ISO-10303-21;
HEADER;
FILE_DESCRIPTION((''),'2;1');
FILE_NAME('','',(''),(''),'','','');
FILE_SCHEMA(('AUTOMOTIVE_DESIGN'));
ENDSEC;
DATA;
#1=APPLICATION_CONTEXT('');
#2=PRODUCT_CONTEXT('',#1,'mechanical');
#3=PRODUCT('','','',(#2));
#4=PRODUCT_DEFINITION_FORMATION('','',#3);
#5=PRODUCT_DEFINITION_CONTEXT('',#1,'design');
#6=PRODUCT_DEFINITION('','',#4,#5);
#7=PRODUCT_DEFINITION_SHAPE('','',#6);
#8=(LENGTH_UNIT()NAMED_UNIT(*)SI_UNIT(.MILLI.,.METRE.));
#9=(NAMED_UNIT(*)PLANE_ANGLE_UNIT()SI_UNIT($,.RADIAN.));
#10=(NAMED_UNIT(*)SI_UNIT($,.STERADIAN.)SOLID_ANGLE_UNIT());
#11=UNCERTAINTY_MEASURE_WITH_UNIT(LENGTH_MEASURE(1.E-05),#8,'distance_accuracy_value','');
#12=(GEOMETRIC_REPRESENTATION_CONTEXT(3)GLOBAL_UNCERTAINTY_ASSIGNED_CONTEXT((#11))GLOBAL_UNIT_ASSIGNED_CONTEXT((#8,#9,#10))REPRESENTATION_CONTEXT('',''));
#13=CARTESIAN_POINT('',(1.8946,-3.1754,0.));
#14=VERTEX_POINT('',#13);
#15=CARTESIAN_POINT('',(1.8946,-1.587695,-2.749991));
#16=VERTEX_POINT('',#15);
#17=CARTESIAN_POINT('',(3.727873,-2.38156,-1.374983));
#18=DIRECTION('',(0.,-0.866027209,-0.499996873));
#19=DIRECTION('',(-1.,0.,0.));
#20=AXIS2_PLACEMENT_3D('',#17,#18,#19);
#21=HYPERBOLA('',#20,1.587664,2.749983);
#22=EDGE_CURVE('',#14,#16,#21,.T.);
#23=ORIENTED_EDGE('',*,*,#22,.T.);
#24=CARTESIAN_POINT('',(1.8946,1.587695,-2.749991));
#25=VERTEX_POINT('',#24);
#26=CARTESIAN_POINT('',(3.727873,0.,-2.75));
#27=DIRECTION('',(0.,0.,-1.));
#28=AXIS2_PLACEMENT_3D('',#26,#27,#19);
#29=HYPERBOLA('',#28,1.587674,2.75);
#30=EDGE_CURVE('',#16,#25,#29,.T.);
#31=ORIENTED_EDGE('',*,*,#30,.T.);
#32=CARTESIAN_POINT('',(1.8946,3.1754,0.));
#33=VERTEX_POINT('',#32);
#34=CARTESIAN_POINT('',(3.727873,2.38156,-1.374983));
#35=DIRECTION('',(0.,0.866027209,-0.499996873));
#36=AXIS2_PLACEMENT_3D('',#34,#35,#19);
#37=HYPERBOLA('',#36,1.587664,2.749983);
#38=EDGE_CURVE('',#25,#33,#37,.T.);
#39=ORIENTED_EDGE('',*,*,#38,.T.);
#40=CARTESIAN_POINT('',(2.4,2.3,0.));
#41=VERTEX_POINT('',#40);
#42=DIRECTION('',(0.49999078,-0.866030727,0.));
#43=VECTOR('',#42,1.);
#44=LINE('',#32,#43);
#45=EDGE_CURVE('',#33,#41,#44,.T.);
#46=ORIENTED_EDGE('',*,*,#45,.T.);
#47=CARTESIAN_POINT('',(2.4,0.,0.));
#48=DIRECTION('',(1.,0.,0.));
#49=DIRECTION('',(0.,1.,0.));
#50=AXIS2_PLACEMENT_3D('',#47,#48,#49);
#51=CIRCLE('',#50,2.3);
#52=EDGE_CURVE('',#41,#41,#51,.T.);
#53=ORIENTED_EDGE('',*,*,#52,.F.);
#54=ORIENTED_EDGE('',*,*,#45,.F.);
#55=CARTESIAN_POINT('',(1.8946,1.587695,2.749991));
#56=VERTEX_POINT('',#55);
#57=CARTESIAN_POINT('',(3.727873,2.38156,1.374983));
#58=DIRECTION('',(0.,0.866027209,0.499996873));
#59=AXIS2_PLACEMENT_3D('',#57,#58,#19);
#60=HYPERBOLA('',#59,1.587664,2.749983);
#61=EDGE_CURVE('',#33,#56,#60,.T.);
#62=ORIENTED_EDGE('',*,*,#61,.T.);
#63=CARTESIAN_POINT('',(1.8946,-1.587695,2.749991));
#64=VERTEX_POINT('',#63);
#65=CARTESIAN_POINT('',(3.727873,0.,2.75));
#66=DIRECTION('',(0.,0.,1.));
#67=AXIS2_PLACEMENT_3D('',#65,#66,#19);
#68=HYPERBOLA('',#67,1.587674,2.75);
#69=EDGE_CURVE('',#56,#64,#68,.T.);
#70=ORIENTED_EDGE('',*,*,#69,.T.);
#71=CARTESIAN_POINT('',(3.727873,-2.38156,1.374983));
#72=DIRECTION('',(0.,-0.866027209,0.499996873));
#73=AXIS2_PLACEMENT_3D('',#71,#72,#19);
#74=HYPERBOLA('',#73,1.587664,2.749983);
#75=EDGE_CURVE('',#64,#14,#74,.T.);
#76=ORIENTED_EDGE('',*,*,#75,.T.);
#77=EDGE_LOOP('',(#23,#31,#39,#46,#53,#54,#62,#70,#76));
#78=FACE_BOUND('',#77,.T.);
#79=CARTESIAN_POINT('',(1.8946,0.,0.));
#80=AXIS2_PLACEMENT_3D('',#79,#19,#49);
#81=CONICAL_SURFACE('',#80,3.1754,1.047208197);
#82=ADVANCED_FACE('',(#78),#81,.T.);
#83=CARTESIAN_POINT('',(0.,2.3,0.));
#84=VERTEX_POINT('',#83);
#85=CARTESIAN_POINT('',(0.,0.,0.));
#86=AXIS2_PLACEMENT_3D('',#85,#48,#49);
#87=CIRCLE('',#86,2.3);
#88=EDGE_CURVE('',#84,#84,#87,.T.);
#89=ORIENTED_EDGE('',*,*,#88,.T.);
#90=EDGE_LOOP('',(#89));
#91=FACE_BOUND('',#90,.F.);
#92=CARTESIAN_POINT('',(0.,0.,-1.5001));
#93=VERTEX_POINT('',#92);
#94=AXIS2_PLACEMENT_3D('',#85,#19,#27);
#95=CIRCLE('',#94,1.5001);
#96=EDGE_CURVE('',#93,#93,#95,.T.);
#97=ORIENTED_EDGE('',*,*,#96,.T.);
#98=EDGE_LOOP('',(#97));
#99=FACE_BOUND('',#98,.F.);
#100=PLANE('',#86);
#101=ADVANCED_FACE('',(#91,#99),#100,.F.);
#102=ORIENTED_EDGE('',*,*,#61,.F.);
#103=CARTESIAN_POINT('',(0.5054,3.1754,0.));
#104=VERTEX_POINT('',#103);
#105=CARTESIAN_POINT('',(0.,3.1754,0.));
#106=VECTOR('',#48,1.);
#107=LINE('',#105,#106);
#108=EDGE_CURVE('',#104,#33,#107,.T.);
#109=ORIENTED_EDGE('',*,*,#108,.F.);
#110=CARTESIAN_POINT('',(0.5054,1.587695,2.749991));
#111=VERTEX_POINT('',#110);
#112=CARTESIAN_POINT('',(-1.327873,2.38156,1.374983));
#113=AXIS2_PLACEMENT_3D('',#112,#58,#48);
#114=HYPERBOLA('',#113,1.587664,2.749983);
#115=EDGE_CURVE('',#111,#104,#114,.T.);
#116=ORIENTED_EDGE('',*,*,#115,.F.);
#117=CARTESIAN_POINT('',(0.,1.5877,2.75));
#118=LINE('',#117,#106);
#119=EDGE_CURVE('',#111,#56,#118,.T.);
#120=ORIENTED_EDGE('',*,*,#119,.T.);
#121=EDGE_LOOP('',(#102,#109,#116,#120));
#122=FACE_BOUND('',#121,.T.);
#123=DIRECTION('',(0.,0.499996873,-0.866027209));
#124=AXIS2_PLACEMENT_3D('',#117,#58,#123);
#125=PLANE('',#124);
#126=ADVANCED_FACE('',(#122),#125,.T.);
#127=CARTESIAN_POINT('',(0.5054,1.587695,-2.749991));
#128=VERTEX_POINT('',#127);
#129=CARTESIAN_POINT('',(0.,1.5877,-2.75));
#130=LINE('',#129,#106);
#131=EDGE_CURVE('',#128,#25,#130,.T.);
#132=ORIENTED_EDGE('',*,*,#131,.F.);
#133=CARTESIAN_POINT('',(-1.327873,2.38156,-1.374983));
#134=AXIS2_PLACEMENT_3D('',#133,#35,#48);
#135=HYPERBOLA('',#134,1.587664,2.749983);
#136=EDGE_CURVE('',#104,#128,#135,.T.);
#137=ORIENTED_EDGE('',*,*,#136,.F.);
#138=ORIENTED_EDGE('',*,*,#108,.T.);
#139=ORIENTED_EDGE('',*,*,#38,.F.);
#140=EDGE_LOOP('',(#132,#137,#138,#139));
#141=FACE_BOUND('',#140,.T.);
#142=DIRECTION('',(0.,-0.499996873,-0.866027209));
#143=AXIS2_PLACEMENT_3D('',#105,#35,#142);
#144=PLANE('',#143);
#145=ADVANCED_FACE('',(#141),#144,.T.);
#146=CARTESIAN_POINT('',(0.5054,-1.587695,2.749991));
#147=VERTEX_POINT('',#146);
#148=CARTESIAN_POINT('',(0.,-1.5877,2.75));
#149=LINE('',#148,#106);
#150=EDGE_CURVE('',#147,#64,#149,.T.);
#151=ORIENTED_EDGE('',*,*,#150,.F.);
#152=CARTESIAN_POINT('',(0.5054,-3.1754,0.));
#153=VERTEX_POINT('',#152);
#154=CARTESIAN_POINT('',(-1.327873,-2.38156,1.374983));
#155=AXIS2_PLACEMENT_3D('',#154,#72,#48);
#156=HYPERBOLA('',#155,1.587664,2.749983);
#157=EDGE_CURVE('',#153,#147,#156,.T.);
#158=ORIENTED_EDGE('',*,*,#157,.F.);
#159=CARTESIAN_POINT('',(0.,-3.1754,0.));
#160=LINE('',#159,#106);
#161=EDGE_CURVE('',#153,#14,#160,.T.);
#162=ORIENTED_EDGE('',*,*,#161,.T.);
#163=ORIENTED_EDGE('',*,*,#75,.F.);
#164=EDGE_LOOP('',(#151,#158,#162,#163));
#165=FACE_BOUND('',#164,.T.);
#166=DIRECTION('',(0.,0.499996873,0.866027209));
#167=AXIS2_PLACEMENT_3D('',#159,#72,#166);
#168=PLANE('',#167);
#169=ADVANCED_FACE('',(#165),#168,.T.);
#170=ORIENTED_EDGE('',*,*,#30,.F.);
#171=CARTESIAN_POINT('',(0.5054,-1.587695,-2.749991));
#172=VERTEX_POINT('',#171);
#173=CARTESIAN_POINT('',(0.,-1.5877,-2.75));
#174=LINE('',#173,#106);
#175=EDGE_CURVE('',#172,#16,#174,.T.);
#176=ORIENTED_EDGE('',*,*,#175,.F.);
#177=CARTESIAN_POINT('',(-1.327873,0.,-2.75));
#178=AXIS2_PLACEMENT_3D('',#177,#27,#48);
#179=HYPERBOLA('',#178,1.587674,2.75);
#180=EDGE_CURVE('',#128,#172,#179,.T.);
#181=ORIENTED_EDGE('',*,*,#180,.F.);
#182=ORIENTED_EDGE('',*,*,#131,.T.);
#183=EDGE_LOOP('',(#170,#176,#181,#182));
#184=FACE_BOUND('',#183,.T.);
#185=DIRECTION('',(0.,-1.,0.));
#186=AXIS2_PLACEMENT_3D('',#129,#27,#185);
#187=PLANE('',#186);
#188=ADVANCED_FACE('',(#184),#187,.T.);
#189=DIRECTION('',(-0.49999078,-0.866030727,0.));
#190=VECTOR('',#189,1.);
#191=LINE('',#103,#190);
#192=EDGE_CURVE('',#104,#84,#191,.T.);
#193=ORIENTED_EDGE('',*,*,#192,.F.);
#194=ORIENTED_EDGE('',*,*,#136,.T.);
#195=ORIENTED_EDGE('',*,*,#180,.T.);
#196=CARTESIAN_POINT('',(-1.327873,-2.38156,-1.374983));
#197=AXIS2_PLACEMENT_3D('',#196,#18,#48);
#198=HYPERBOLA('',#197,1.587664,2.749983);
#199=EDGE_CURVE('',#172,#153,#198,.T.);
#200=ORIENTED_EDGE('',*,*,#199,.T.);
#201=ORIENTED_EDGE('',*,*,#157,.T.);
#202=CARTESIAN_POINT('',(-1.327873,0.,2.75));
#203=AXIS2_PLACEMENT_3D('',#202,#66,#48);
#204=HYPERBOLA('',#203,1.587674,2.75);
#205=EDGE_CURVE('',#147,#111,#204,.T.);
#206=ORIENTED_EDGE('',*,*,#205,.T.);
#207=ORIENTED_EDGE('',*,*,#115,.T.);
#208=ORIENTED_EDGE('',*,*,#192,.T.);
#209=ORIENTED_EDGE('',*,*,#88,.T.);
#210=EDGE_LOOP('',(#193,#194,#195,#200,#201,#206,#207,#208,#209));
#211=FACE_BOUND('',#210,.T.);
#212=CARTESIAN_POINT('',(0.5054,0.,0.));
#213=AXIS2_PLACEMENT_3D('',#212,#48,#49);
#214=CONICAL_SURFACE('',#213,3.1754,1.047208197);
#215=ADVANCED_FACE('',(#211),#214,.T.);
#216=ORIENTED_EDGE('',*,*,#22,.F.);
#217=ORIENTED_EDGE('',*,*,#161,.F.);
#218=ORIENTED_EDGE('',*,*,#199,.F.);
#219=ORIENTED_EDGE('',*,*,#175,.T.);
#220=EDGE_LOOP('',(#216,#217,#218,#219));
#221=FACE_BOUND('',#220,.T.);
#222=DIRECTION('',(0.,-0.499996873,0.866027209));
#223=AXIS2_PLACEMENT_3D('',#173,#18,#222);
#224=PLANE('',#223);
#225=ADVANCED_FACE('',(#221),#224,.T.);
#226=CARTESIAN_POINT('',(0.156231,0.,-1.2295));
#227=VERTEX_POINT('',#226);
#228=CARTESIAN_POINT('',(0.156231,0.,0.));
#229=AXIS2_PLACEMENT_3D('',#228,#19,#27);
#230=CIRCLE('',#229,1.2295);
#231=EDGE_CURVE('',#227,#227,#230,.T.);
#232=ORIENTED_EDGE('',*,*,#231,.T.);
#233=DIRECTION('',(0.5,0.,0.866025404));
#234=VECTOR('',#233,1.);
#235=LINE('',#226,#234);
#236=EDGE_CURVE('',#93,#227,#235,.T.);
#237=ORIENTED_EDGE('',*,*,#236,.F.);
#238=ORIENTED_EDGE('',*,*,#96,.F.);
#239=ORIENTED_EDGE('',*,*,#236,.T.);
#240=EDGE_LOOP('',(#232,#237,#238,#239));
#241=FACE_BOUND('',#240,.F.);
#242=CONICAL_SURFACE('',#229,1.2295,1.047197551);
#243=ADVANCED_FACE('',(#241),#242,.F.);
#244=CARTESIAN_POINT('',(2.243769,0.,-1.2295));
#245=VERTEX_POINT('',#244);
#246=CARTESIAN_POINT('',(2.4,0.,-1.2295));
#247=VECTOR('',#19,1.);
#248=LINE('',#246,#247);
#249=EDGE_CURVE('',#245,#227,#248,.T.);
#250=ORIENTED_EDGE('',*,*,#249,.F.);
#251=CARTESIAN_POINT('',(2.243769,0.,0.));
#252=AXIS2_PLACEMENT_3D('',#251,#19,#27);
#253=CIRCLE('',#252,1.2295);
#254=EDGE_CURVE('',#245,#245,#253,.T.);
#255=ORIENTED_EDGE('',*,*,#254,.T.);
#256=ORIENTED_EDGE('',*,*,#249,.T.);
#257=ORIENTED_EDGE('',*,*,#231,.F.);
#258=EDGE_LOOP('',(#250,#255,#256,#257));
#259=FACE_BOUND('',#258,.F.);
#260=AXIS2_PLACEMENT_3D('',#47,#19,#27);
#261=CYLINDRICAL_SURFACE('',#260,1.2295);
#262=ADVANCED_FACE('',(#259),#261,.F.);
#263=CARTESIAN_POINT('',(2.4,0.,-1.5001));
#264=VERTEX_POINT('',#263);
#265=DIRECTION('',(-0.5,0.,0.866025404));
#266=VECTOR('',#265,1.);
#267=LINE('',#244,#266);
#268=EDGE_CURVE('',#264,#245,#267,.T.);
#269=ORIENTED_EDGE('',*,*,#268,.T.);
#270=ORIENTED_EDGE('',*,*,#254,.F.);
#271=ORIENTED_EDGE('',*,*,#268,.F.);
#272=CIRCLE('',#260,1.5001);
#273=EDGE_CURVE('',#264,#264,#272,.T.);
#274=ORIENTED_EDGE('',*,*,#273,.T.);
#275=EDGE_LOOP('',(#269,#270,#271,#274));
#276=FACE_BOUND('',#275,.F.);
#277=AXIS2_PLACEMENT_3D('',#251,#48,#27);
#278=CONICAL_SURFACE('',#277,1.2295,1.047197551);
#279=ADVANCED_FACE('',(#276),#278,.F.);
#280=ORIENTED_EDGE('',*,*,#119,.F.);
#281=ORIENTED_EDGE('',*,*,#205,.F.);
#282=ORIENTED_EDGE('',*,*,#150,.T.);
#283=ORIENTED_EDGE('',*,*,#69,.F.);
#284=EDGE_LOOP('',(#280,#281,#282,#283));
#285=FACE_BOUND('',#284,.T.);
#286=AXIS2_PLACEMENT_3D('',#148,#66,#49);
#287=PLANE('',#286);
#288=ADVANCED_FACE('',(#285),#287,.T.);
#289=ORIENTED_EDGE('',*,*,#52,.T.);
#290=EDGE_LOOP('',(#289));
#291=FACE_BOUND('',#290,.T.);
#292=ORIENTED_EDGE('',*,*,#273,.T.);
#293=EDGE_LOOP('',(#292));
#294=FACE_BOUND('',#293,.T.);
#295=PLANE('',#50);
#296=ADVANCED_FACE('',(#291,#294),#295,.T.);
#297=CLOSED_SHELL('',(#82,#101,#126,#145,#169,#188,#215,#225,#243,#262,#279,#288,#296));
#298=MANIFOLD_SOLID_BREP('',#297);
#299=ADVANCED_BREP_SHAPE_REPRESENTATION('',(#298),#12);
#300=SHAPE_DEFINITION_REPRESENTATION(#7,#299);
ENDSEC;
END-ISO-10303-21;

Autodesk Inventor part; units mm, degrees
ref_plane "YZ Plane" through (0, 0, 0) normal (1, 0, 0) x (0, 1, 0)
ref_plane "XZ Plane" through (0, 0, 0) normal (0, 1, 0) x (-1, 0, 0)
sketch "Sketch1" plane through (0, 0, 0) normal (1, 0, 0) x (0, 1, 0)
  line L0 (-3.1754, 0) -> (-1.5877, 2.75)
  line L1 (-1.5877, 2.75) -> (1.5877, 2.75)
  line L2 (1.5877, 2.75) -> (3.1754, 0)
  line L3 (3.1754, 0) -> (1.5877, -2.75)
  line L4 (1.5877, -2.75) -> (-1.5877, -2.75)
  line L5 (-1.5877, -2.75) -> (-3.1754, 0)
  point P0 (0, 0)
  point P1 (0, 0)
  dimension "d0" = 6.3509
extrude "Body" add sketch "Sketch1" along normal blind 2.4
sketch "Sketch2" plane through (0, 0, 0) normal (0, 0, 1) x (1, 0, 0)
  line L0 (0, 1.5877) -> (0, 3.1754) projected
  line L1 (0, 3.1754) -> (2.4, 3.1754) projected
  line L2 (2.4, 1.5877) -> (2.4, 3.1754) projected
  line L3 (-0.48, 0) -> (2.88, 0) projected
  line L4 (0.5054, 3.1754) -> (0, 2.3)
  line L5 (1.8946, 3.1754) -> (2.4, 2.3)
  dimension "d3" = 30
  dimension "d4" = 30
  dimension "d5" = 4.6
  dimension "d6" = 4.6
revolve "Chamfer1" cut sketch "Sketch2" angle 360 about axis through (-10, 0, 0) along (1, 0, 0)
sketch "Sketch3" plane through (2.4, 0, 0) normal (1, 0, 0) x (0, 0, -1)
  arc A0 (-0.625, -1.0825) -> (0.625, -1.0825) centre (0, 0) ccw projected
hole "Thread" at (2.4, 0, 0) direction (-1, 0, 0) diameter 2.459 end through all thread size "M3x0.5" class "6H" standard "ISO Metric profile"
chamfer "Chamfer2" distance 0.2706 angle 30 1 edges at (2.4, 0, 1.2295) measured on face at (2.4, 1.9179, -0.2329)
chamfer "Chamfer3" distance 0.2706 angle 30 1 edges at (0, 0, 1.2295) measured on face at (0, 1.9179, -0.2329)
ref_plane "Work Plane1" through (-6.3375, 0, 0) normal (0, -0.8660254, -0.5) x (1, 0, 0)
equation "\"d0\" = 1.1547 * SW"
equation "\"d1\" = KOH"
equation "\"d3\" = ANG1"
equation "\"d4\" = ANG2"
equation "\"d5\" = SW0"
equation "\"d6\" = SW01"
equation "\"d8\" = -0.5 * GD1 + 0.5 * NND"
equation "\"d40\" = -0.5 * GD1 + 0.5 * NND"
equation "\"d10\" = -0.5 * GD1 + 0.5 * NND"
equation "\"d41\" = -0.5 * GD1 + 0.5 * NND"
equation "\"ANG1\" = 30deg"
equation "\"ANG2\" = 30deg"
equation "\"NND\" = 3"
equation "\"KOH\" = 2.4"
equation "\"SW\" = 5.5"
equation "\"SW0\" = 4.6"
equation "\"SW01\" = 4.6"
equation "\"GUL\" = 0.541266 * PTC"
equation "\"THREADDIA\" = 3"
equation "\"TOA\" = 30deg"
equation "\"PTC\" = 0.5"
equation "\"E0\" = 1.155 * SW"
equation "\"GAL\" = 0.541266 * PTC"
equation "\"GD1\" = 2.458734"
properties part number "DIN 555-5 - M3" material "Steel, Mild"
